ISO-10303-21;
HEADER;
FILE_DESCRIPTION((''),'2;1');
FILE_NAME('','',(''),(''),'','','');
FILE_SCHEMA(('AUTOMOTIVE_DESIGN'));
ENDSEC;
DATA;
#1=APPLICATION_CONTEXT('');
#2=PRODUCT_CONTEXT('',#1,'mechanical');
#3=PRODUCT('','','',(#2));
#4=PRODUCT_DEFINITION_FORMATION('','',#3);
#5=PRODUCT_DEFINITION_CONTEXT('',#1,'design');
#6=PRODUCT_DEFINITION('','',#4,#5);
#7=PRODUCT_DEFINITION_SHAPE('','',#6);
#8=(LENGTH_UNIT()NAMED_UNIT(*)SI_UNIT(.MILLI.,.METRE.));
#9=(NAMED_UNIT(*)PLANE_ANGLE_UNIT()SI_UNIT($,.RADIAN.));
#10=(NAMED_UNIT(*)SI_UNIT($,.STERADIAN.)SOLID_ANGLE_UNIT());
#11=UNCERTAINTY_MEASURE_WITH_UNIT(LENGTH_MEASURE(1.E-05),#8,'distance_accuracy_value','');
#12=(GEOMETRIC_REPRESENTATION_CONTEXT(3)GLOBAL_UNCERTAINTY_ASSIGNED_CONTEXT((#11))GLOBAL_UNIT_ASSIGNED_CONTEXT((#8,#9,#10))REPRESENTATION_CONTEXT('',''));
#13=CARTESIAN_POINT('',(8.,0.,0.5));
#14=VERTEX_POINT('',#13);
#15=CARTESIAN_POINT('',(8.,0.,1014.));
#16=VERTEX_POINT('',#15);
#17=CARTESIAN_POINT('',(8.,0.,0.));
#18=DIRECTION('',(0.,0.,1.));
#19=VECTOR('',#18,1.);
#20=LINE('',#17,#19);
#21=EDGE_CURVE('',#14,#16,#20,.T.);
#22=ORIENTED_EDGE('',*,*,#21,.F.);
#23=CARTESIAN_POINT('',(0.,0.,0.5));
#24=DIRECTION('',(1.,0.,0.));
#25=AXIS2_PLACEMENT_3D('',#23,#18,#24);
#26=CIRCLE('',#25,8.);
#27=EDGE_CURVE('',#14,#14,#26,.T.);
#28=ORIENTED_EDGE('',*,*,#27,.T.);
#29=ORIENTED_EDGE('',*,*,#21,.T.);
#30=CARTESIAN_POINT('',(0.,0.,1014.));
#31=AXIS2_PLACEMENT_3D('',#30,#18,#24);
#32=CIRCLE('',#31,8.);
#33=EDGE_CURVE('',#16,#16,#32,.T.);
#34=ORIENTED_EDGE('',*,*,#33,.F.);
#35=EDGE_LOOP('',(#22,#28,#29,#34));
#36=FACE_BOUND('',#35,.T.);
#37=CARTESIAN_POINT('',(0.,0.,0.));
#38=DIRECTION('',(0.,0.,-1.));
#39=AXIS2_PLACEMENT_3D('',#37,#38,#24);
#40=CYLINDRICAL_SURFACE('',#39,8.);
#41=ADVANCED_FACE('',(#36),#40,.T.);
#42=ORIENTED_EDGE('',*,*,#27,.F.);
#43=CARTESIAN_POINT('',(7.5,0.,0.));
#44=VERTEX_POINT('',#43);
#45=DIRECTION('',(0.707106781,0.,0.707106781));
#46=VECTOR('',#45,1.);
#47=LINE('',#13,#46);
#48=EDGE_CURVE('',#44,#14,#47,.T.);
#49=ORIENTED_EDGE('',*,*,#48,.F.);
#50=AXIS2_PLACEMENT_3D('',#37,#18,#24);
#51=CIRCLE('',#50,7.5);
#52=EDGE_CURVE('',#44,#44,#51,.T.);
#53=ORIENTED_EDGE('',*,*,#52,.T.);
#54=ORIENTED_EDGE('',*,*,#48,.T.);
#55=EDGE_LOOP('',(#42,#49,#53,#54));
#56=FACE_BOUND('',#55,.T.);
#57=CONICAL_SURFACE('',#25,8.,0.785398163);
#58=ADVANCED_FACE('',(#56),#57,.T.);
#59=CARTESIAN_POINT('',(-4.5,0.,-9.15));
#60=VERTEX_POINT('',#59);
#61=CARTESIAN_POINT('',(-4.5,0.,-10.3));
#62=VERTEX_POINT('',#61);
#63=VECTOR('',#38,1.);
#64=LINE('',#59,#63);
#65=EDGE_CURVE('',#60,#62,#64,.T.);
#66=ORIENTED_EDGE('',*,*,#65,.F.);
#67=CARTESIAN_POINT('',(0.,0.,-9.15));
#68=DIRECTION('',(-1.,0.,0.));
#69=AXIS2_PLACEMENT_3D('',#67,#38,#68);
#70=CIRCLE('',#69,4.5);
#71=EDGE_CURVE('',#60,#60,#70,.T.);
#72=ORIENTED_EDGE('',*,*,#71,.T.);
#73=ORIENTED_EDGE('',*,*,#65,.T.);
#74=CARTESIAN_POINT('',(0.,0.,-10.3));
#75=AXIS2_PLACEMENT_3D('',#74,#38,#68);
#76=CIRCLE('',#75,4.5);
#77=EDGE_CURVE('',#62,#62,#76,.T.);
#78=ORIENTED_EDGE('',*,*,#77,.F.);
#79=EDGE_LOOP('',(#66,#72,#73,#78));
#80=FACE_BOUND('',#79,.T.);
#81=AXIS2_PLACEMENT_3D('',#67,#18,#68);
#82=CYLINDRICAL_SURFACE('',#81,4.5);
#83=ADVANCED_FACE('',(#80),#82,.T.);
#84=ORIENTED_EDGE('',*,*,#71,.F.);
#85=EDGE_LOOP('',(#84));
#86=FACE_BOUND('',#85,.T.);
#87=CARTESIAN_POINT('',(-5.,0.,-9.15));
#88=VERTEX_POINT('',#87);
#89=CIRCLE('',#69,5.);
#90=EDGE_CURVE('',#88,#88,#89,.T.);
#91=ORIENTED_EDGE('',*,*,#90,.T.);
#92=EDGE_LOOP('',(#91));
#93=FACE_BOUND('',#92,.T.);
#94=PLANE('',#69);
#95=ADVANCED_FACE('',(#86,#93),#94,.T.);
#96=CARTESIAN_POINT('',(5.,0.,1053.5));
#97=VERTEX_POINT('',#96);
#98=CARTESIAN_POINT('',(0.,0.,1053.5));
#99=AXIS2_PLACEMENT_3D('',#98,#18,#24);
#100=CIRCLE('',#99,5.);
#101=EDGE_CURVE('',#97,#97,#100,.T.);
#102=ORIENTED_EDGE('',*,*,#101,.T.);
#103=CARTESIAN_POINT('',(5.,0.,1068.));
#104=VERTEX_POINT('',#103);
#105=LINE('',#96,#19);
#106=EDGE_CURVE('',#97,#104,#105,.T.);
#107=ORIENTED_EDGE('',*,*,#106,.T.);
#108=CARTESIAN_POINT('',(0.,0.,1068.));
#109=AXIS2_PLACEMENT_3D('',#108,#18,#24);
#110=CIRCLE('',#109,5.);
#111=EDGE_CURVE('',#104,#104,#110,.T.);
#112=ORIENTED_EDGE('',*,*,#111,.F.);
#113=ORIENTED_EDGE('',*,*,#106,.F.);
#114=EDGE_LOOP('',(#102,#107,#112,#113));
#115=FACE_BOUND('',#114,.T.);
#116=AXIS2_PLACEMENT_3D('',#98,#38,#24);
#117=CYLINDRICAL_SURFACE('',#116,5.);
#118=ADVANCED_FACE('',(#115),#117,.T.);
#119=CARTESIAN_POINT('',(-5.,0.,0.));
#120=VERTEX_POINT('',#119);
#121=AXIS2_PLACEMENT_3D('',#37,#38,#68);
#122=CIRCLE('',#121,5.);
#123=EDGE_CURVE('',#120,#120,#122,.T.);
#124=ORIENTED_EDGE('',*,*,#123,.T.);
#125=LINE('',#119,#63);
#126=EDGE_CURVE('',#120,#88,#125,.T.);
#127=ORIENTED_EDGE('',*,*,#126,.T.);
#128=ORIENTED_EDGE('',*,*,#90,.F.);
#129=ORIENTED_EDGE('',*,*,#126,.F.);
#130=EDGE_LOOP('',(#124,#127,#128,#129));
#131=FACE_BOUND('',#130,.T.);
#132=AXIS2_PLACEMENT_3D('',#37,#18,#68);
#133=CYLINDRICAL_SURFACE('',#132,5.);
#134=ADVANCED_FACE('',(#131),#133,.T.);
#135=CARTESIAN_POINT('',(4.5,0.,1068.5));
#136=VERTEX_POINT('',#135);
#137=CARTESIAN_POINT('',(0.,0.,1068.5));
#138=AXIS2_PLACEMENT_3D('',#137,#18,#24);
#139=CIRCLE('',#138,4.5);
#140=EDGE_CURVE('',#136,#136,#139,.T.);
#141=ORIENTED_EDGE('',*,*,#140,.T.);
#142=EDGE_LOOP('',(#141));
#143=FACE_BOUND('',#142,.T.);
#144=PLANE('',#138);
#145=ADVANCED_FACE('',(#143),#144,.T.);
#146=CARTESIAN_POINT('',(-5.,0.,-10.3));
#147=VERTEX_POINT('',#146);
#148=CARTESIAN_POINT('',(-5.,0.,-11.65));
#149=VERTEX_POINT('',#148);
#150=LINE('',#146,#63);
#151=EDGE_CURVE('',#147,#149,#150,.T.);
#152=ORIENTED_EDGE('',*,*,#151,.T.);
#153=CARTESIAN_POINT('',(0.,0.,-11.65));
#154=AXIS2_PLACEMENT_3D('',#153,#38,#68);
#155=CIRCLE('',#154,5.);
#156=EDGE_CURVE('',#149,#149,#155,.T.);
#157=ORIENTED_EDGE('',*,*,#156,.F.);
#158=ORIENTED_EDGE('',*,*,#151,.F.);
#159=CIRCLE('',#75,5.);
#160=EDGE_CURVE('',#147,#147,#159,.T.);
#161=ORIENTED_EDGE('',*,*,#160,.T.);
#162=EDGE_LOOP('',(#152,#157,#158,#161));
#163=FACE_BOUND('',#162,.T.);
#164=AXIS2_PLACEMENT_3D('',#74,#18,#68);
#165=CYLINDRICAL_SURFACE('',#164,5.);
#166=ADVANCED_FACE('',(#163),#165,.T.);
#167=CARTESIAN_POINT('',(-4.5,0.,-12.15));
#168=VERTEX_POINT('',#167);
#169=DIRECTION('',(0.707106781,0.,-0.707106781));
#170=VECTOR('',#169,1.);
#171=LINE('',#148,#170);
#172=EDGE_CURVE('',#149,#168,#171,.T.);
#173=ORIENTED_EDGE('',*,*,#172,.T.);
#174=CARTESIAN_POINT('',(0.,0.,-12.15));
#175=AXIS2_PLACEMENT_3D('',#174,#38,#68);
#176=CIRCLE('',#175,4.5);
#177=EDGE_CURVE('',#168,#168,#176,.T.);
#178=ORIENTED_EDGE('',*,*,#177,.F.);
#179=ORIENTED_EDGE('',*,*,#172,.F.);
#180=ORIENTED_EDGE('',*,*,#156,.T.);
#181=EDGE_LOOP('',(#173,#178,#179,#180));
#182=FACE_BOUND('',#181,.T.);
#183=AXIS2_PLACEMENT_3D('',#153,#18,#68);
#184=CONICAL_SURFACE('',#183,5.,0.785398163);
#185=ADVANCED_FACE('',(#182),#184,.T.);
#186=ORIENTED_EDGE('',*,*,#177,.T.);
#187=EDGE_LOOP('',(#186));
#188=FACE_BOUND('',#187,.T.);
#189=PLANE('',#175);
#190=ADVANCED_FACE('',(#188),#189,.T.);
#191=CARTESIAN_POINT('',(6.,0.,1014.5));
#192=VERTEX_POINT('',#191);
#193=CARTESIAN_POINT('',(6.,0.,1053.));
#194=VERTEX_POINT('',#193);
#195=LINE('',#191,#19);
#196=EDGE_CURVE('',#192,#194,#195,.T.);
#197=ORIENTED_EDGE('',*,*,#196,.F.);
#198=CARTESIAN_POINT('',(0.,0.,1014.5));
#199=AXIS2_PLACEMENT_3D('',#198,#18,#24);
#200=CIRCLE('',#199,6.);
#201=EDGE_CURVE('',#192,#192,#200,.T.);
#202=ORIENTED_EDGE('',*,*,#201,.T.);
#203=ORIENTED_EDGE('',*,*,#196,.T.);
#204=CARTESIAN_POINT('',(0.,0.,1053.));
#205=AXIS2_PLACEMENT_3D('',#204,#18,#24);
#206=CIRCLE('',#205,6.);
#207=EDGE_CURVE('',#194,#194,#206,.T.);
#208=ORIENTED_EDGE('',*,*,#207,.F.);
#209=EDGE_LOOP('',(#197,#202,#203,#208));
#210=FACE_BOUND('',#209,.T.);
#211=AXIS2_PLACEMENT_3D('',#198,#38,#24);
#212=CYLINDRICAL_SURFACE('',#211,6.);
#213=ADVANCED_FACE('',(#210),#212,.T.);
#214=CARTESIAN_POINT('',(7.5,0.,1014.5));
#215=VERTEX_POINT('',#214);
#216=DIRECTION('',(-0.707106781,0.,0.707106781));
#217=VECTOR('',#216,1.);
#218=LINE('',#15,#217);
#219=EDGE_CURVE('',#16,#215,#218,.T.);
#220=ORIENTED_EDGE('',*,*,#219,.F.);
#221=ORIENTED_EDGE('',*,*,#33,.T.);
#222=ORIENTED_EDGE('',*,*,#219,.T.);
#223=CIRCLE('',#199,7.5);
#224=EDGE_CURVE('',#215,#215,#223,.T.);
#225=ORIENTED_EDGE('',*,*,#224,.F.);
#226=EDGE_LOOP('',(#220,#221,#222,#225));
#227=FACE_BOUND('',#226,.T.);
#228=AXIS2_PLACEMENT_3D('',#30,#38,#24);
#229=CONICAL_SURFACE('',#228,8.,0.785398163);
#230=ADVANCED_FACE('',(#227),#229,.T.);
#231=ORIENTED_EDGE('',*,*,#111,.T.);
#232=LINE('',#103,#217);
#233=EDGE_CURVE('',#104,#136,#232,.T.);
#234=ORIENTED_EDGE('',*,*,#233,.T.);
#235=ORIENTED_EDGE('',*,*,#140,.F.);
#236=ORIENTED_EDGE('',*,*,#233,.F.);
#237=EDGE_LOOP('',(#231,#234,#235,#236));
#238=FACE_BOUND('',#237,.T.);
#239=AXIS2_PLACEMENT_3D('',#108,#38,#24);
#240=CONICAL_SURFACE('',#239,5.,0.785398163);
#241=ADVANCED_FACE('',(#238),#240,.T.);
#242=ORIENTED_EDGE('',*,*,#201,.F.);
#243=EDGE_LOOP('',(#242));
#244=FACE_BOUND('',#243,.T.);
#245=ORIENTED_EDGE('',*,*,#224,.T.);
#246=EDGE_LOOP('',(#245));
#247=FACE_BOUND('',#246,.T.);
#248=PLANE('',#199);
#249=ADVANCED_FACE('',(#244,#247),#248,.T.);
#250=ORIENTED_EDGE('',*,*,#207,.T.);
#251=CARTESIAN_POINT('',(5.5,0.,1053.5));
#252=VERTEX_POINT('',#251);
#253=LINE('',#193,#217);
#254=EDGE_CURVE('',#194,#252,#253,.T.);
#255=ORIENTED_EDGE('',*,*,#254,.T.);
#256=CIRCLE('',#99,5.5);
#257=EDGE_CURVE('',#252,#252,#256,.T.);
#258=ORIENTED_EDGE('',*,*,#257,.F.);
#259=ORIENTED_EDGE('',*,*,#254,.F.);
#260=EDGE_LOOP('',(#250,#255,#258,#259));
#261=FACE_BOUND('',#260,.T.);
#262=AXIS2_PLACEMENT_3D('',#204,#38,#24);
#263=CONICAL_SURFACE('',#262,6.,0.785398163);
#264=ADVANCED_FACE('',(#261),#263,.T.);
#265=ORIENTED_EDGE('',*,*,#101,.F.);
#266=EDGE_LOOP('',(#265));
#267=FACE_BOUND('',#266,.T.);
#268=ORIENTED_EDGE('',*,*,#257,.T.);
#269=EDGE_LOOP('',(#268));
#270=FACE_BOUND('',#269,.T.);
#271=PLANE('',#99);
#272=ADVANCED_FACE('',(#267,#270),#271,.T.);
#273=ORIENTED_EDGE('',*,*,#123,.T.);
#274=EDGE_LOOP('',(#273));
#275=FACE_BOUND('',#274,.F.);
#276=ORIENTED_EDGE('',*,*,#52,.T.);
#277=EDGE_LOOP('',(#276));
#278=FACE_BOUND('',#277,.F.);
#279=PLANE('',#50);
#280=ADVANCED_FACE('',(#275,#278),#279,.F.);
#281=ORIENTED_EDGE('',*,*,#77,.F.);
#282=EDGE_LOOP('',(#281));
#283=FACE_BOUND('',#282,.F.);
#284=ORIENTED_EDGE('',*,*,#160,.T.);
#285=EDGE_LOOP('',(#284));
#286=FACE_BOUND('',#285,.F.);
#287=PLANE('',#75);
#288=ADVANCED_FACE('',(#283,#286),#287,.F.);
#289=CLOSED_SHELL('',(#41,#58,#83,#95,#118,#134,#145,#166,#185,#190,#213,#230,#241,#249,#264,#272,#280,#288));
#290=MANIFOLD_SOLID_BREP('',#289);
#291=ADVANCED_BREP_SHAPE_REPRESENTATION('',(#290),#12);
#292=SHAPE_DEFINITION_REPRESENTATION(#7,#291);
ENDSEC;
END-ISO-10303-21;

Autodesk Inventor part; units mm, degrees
ref_plane "YZ Plane" through (0, 0, 0) normal (1, 0, 0) x (0, 1, 0)
ref_plane "XZ Plane" through (0, 0, 0) normal (0, 1, 0) x (-1, 0, 0)
ref_plane "XY Plane" through (0, 0, 0) normal (0, 0, 1) x (1, 0, 0)
sketch "Esboço1" plane through (0, 0, 0) normal (0, 0, 1) x (1, 0, 0)
  circle A0 centre (0, 0) radius 8
  dimension "d0" = 16
extrude "Extrusão1" add sketch "Esboço1" along normal blind 1014.5
sketch "Esboço2" plane through (0, 0, 1014.5) normal (0, 0, 1) x (1, 0, 0)
  circle A0 centre (0, 0) radius 6
  dimension "d3" = 12
extrude "Extrusão2" add sketch "Esboço2" along normal blind 39
sketch "Esboço3" plane through (0, 0, 1053.5) normal (0, 0, 1) x (1, 0, 0)
  circle A0 centre (0, 0) radius 5
  dimension "d6" = 10
extrude "Extrusão3" add sketch "Esboço3" along normal blind 15
sketch "Esboço4" plane through (0, 0, 0) normal (0, 0, -1) x (-1, 0, 0)
  circle A0 centre (0, 0) radius 5
  dimension "d9" = 10
extrude "Extrusão4" add sketch "Esboço4" along normal blind 9.15
sketch "Esboço5" plane through (0, 0, -9.15) normal (0, 0, -1) x (-1, 0, 0)
  circle A0 centre (0, 0) radius 4.5
  dimension "d12" = 9
extrude "Extrusão5" add sketch "Esboço5" along normal blind 1.15
sketch "Esboço6" plane through (0, 0, -10.3) normal (0, 0, -1) x (-1, 0, 0)
  circle A0 centre (0, 0) radius 5
  dimension "d15" = 10
extrude "Extrusão6" add sketch "Esboço6" along normal blind 1.85
thread "Rosca1" size "M12x1.75" class "6g" standard "ANSI Metric M Profile" length 14
chamfer "Chanfro1" distance 0.5 angle 45 5 edges at (-5, 0, 1068.5) (-6, 0, 1053.5) (-8, 0, 1014.5) (-8, 0, 0) (5, 0, -12.15)
properties part number "SFU16XX_Y1"
